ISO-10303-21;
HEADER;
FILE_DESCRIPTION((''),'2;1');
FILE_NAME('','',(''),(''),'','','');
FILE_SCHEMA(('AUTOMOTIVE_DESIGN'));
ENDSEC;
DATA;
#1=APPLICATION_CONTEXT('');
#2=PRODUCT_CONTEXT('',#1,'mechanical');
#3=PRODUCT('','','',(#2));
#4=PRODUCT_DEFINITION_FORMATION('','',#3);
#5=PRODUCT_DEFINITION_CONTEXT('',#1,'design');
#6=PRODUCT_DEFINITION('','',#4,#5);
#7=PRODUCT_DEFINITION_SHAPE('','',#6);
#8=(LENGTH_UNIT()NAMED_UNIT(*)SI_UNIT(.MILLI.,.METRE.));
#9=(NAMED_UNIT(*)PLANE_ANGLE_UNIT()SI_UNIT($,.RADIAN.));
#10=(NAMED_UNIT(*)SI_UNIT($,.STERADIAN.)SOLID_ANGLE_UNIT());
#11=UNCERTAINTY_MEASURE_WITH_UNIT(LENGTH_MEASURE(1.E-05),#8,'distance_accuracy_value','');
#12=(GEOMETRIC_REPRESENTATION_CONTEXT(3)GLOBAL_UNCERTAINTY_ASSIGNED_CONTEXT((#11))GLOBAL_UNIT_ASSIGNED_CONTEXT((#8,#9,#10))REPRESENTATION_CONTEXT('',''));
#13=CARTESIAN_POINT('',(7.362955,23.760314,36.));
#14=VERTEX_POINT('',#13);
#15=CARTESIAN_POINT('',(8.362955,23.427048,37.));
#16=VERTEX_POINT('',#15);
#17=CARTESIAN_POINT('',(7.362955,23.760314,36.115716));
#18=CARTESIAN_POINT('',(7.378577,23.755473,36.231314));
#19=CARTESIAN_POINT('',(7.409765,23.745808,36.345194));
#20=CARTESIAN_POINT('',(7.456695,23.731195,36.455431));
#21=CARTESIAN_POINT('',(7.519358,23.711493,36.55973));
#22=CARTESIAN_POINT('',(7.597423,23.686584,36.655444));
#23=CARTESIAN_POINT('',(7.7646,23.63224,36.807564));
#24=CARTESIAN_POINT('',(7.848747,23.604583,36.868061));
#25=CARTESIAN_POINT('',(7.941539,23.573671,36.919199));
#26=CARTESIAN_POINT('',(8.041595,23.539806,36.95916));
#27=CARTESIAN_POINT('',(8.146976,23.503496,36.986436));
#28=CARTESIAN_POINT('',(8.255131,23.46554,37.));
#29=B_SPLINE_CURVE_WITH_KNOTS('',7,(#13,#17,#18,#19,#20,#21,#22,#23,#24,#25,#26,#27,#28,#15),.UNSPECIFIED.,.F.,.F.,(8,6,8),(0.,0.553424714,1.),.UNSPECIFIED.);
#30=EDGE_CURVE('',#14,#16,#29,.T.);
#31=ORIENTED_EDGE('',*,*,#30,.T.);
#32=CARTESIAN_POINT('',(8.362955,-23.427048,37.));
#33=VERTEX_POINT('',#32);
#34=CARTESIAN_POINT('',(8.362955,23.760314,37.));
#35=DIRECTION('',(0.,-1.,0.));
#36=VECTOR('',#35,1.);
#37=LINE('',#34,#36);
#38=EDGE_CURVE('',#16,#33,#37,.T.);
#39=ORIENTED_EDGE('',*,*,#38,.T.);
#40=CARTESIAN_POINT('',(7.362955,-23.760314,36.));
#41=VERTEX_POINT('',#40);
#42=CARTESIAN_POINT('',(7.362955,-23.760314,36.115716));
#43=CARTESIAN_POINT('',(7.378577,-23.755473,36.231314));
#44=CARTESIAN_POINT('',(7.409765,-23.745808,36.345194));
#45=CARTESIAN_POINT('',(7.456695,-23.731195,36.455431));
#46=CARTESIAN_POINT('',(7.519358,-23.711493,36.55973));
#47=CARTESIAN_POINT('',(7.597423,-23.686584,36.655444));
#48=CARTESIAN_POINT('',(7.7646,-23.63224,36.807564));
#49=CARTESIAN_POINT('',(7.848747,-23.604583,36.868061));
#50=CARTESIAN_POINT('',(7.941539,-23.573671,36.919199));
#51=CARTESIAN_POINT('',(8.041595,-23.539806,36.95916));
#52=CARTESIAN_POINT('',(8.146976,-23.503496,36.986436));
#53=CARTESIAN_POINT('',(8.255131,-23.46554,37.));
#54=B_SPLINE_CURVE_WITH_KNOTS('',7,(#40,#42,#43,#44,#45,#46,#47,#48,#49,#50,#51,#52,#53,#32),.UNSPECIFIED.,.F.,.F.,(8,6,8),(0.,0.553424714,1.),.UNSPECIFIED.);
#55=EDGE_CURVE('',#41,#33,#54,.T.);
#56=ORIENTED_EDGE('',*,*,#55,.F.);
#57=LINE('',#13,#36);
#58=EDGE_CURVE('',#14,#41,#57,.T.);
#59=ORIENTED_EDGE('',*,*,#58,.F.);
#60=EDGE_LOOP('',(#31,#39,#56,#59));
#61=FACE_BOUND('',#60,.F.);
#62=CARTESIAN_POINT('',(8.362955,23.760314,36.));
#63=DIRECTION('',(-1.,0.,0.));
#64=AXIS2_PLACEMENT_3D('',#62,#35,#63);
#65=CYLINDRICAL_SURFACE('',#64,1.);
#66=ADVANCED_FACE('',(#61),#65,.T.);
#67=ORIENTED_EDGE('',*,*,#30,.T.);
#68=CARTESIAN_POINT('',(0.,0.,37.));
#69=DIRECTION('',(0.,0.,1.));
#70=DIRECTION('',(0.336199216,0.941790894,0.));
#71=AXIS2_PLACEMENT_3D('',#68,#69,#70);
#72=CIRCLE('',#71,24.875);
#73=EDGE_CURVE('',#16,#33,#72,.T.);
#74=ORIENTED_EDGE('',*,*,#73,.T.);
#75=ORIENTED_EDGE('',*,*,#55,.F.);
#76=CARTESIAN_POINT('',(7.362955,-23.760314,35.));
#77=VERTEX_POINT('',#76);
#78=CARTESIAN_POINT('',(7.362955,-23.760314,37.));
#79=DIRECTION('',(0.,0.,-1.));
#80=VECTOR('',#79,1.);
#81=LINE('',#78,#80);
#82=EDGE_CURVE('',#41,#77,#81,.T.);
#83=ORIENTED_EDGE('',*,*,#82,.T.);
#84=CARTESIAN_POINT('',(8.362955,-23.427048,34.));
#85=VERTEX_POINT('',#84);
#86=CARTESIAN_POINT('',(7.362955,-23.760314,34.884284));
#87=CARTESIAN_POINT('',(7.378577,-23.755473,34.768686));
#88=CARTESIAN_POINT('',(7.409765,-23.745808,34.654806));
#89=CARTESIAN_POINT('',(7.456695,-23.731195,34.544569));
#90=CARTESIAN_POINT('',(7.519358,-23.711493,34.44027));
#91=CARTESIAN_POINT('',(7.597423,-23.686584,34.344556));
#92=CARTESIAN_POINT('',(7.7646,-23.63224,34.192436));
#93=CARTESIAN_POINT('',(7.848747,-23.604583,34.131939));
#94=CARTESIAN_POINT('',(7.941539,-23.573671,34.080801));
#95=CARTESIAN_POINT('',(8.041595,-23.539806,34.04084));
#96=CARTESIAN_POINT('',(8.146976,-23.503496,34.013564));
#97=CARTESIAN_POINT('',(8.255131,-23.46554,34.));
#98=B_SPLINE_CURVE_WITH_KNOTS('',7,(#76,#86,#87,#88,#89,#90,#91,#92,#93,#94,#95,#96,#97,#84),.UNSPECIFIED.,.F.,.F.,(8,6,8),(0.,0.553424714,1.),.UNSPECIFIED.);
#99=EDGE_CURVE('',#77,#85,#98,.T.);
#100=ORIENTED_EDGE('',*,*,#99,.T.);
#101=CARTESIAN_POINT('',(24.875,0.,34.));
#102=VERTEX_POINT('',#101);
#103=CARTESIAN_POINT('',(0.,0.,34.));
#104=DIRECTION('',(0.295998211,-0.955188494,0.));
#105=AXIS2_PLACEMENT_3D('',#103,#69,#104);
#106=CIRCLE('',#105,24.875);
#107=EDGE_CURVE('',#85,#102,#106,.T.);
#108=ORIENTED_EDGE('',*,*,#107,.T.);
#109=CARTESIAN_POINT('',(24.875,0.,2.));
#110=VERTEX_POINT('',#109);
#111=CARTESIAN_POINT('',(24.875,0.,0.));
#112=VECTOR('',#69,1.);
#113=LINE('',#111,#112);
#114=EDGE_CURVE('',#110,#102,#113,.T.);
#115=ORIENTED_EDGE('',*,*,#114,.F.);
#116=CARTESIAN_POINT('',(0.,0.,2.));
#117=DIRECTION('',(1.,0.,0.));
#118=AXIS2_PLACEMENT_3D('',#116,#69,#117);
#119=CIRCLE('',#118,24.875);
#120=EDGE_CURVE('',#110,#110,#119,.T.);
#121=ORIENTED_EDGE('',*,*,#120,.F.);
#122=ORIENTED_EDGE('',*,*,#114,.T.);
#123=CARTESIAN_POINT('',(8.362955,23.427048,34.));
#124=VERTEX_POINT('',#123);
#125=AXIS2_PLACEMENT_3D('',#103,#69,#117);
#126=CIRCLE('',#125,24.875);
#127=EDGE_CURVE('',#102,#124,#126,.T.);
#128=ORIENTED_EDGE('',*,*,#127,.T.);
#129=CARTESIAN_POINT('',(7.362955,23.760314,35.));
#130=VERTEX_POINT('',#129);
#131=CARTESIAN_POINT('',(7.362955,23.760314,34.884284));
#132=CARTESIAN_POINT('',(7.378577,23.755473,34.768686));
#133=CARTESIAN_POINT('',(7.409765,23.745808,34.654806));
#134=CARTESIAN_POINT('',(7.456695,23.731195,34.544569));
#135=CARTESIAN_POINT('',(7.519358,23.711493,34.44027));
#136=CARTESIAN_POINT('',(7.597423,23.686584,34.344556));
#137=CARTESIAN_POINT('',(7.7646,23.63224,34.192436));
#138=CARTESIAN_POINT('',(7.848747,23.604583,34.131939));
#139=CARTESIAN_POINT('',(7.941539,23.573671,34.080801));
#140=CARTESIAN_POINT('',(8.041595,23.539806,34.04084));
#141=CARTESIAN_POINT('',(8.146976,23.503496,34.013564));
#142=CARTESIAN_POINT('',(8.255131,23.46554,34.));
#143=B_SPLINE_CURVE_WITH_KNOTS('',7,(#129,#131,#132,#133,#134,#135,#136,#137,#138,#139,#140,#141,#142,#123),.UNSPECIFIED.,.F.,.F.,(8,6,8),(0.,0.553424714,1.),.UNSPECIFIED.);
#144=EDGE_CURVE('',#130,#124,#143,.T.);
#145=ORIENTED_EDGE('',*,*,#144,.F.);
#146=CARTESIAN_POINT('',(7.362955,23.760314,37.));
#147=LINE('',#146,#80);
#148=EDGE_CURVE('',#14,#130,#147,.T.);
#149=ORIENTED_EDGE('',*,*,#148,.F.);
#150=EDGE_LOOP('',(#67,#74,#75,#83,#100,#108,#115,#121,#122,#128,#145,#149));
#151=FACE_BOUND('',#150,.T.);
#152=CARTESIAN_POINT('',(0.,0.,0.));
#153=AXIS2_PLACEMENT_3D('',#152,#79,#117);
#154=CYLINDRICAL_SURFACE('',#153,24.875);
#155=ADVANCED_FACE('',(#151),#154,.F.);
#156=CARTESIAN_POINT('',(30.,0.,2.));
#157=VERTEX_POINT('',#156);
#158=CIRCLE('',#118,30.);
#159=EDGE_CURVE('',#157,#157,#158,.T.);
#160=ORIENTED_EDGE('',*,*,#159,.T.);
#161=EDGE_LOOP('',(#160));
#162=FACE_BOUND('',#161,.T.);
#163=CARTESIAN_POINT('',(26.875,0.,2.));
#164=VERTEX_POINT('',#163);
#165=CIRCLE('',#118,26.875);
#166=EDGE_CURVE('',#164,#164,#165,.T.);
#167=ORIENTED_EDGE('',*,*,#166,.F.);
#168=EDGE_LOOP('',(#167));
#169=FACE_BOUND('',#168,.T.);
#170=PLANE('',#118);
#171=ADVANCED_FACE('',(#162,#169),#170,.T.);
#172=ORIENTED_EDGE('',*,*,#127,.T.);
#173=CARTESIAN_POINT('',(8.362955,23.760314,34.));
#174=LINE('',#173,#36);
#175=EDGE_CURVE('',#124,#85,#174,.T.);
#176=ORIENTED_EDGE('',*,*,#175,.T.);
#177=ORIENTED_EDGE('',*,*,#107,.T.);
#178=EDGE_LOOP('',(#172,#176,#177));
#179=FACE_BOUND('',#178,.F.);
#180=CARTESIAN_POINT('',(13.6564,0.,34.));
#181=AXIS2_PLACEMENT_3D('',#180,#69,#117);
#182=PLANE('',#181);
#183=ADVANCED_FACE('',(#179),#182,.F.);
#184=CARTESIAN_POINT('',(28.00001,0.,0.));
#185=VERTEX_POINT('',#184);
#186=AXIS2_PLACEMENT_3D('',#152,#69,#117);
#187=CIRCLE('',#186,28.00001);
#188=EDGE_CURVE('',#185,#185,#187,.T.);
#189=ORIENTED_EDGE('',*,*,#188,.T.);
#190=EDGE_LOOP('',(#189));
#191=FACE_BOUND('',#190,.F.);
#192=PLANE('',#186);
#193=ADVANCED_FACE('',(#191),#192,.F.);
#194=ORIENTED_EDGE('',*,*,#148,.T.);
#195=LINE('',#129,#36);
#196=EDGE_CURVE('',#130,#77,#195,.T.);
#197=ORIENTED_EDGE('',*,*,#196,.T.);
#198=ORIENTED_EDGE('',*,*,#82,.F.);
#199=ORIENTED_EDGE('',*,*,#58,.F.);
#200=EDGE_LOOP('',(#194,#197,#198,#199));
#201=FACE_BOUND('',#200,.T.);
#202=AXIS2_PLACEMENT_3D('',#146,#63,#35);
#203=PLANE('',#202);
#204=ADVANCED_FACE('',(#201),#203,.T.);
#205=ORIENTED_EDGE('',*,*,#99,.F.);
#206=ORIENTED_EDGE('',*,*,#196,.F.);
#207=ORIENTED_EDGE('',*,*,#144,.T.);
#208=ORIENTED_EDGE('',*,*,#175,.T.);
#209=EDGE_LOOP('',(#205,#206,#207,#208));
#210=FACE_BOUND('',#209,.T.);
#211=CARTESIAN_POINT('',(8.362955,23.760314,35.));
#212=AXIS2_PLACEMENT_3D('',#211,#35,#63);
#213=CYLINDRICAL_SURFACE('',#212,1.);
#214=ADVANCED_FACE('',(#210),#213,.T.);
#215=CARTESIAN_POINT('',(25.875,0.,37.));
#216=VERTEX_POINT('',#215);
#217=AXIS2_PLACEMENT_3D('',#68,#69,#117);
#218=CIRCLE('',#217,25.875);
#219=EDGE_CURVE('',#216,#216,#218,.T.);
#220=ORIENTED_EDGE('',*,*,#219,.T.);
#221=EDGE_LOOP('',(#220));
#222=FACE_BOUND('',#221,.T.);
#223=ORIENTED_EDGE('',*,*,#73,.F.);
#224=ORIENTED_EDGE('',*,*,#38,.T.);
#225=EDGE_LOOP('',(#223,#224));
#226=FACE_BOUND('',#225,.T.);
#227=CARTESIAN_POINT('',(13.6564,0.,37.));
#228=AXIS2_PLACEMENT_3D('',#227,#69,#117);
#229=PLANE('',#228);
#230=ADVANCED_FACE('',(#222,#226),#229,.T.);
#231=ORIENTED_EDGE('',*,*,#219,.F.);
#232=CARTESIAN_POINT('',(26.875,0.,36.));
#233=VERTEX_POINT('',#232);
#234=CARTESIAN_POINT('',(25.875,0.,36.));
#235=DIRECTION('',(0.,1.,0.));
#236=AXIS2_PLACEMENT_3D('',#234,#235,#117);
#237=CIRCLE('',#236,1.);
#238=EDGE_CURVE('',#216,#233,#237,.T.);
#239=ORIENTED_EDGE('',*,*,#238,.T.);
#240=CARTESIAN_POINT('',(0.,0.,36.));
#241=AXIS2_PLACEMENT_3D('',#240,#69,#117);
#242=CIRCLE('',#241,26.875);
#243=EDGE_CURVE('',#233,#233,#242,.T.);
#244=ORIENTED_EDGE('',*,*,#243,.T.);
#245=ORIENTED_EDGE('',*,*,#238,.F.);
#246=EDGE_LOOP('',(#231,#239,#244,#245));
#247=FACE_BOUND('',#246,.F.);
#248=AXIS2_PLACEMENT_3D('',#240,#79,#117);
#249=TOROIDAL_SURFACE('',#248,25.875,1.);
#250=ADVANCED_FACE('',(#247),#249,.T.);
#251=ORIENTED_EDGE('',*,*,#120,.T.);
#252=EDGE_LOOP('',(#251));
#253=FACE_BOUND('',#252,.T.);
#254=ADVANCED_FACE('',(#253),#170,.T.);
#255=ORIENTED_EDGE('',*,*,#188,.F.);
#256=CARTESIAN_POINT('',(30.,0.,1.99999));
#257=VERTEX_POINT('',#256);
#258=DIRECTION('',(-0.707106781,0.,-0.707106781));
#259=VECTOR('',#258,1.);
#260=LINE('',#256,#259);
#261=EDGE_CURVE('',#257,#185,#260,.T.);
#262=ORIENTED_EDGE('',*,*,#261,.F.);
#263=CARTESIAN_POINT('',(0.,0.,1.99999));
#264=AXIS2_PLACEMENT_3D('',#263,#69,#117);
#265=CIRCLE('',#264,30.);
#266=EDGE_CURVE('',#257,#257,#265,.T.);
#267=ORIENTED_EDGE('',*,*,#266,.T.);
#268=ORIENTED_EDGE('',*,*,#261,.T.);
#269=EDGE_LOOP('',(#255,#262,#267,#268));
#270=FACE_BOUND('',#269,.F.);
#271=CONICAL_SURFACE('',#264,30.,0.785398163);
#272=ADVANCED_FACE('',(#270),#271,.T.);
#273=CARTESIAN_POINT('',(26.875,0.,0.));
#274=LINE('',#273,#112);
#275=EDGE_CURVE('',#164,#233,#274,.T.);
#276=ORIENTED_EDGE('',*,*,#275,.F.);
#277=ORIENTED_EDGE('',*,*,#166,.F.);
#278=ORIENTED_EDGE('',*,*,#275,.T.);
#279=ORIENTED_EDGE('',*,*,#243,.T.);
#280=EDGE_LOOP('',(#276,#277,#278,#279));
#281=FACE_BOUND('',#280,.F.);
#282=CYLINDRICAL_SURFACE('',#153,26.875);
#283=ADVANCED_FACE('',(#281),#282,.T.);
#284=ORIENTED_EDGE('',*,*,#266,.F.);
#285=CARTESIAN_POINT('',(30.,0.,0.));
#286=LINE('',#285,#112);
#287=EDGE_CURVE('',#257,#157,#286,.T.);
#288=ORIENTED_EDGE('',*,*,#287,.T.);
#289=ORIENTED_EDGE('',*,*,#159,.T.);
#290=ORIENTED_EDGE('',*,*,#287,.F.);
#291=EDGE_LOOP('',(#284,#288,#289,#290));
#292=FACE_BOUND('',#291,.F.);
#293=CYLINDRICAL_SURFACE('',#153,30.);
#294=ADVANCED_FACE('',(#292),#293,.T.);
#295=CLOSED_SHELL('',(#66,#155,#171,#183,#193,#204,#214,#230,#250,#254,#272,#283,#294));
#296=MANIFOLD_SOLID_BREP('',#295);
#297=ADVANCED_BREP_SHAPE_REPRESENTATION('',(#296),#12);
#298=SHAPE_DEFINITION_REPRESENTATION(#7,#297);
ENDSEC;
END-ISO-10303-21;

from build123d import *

# Parameters (mm, degrees)
F0_R     = 26.875
F0_R_2   = 24.875
F1_DEPTH = 37
F0_R_3   = 30
F2_DEPTH = 2
F4_DEPTH = 3
F5_R     = 1
F6_SIZE  = 1.99999


# Not quite as in the source:
# - a fillet or chamfer is up to 0.001 mm smaller than in the source, because OpenCascade refuses the exact size


with BuildPart() as f1:
    # F0 (on Top) → F1 (new body)
    with BuildSketch(Plane.XY):
        Circle(F0_R)
        Circle(F0_R_2, mode=Mode.SUBTRACT)
    extrude(amount=F1_DEPTH)

    # F0 (on Top) → F2 (join)
    with BuildSketch(Plane.XY):
        Circle(F0_R_3)
        Circle(F0_R, mode=Mode.SUBTRACT)
        Circle(F0_R_2)
    extrude(amount=F2_DEPTH)

    # F3 (on face) → F4 (join)
    with BuildSketch(Plane.XY.offset(37)):
        with BuildLine():
            ThreePointArc((7.3629554948, -23.7603137896), (20.0239749167, -14.7582537427), (24.875, 0))
            ThreePointArc((24.875, 0), (20.0239749167, 14.7582537427), (7.3629554948, 23.7603137896))
            Line((7.3629554948, 23.7603137896), (7.3629554948, -23.7603137896))
        make_face()
    extrude(amount=-F4_DEPTH)

    # F5
    f5_edges = [f1.edges().sort_by_distance(p)[0] for p in [
        (7.362955, 0, 34),
        (7.362955, 0, 37),
        (-26.875, 0, 37),
    ]]
    fillet(f5_edges, radius=F5_R)

    # F6 (size 2 in the source; OpenCascade refuses exactly that, so slightly less here)
    f6_edges = [f1.edges().sort_by_distance(p)[0] for p in [
        (-30, 0, 0),
    ]]
    chamfer(f6_edges, length=F6_SIZE)


solid = f1.part
